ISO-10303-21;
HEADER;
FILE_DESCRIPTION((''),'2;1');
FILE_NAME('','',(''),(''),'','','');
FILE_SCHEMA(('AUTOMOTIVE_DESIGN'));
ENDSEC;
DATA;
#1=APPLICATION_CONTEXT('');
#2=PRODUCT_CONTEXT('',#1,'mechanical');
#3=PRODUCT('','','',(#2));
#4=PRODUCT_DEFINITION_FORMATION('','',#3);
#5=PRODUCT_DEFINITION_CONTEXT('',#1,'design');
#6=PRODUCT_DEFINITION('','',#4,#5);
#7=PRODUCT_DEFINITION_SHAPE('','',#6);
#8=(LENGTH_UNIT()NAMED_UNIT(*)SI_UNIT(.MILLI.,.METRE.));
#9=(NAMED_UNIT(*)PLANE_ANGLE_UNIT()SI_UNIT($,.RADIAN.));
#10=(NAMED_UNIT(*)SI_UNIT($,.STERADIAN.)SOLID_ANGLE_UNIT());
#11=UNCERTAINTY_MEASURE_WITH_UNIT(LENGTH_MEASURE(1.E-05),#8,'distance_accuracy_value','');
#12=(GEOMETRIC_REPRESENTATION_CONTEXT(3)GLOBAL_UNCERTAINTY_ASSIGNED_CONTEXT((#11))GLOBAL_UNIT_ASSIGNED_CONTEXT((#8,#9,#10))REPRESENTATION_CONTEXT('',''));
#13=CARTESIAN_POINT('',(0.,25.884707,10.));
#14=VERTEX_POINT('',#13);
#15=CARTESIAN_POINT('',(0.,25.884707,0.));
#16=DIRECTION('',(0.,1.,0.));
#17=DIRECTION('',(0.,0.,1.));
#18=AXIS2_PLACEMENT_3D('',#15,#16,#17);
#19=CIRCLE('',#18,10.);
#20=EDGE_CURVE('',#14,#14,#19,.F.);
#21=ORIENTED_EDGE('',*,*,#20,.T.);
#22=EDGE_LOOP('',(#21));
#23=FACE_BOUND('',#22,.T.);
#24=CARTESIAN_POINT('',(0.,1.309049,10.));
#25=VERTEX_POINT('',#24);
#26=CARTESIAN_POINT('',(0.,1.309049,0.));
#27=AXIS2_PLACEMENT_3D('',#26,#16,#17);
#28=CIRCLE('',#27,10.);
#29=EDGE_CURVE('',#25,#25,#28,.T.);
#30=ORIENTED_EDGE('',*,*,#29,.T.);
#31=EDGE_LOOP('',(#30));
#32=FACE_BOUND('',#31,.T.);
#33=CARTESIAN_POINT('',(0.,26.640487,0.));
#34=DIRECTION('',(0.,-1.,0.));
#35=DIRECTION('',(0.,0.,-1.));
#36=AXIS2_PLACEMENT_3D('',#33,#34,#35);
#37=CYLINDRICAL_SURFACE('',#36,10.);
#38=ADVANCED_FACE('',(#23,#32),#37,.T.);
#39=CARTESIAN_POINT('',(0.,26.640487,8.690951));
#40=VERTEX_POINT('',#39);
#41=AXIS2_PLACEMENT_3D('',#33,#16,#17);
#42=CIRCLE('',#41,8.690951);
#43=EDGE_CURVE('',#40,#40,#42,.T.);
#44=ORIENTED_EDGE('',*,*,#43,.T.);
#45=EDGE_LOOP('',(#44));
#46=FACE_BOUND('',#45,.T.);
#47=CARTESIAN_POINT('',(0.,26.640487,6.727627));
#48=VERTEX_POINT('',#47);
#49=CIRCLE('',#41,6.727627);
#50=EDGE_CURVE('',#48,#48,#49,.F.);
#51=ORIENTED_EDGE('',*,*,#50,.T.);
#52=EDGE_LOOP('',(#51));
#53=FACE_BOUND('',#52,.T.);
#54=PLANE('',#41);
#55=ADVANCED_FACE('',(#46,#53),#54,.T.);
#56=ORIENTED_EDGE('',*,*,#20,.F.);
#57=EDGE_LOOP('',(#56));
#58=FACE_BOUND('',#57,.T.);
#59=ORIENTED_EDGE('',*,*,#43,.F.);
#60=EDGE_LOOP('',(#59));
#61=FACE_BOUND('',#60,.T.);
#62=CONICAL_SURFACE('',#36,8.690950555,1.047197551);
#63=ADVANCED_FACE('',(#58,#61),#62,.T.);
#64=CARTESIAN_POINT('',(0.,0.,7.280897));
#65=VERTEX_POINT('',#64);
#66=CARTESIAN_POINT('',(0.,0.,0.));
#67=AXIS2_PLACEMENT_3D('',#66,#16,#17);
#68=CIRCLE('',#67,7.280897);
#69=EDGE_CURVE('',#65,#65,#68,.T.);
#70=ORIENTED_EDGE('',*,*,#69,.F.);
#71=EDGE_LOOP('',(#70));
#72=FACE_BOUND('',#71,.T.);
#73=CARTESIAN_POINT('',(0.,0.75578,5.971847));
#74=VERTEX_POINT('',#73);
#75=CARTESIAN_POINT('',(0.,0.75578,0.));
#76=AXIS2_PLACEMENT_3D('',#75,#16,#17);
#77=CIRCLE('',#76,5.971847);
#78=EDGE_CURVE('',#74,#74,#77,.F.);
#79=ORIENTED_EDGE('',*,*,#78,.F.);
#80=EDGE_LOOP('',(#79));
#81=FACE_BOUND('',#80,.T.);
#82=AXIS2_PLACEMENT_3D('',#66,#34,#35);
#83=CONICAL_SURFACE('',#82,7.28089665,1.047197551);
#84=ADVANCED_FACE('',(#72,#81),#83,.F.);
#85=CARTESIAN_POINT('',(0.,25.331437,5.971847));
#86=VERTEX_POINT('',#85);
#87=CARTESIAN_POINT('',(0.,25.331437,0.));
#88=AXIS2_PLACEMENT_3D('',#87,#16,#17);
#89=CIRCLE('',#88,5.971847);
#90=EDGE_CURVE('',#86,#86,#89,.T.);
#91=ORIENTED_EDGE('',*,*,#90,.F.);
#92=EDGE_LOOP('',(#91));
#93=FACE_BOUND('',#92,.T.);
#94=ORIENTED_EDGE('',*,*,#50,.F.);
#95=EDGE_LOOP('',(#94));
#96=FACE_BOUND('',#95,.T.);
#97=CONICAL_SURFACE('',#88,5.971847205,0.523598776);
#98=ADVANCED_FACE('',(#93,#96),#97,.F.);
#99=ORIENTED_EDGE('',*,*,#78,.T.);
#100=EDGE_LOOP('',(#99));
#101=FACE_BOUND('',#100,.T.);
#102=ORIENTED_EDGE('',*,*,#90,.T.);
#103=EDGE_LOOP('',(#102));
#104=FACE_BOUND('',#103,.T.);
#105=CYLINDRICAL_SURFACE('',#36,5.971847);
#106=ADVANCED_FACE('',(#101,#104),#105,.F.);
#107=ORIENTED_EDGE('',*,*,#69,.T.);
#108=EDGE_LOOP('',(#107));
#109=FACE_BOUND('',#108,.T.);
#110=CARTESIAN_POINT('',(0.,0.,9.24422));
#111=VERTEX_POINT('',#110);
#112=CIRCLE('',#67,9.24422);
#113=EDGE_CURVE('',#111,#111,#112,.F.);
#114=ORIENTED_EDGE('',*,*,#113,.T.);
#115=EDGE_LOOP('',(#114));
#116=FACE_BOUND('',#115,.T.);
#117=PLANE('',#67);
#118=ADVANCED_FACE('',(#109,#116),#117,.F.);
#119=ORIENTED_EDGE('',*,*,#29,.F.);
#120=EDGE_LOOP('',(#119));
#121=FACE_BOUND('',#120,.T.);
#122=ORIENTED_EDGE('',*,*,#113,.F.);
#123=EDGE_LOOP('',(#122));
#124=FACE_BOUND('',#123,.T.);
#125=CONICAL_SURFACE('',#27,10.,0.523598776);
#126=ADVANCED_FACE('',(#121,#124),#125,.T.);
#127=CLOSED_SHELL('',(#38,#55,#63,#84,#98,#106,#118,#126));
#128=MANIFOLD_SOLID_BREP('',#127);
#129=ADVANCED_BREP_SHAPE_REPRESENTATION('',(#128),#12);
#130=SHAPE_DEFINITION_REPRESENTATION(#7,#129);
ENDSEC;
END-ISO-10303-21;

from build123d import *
from OCP.BRepFilletAPI import BRepFilletAPI_MakeChamfer

# Parameters (mm, degrees)
SKETCH1_R           = 10
BOSS_EXTRUDE1_DEPTH = 26.64048685
SKETCH2_R           = 5.971847205
CUT_EXTRUDE1_DEPTH  = 31.161491004
CHAMFER1_SIZE       = 0.75578005
CHAMFER1_SIZE2      = 1.309049445


with BuildPart() as part:
    # Sketch1 → Boss-Extrude1 (new body)
    with BuildSketch(Plane(origin=(0, 0, 0), x_dir=(1, 0, 0), z_dir=(0, 1, 0))):
        Circle(SKETCH1_R)
    extrude(amount=BOSS_EXTRUDE1_DEPTH)

    # Sketch2 → Cut-Extrude1 (cut, through all)
    with BuildSketch(Plane(origin=(0, 0, 0), x_dir=(1, 0, 0), z_dir=(0, 1, 0))):
        Circle(SKETCH2_R)
    extrude(amount=CUT_EXTRUDE1_DEPTH, mode=Mode.SUBTRACT)

    # Chamfer1: one chamfer whose edges measure the first distance from different faces: ONE call of the kernel's chamfer builder (chamfer() names one face for all edges)
    chamfer1_edges_1 = [part.edges().sort_by_distance(p)[0] for p in [
        (-5.971847205, 26.64048685, 0),
    ]]
    chamfer1_side_1 = [part.faces().sort_by_distance(p)[0] for p in [
        (-9.717157288, 26.64048685, 0),
    ]]
    chamfer1_edges_2 = [part.edges().sort_by_distance(p)[0] for p in [
        (-5.971847205, 0, 0),
    ]]
    chamfer1_side_2 = [part.faces().sort_by_distance(p)[0] for p in [
        (-5.971847205, 13.320243425, 0),
    ]]
    chamfer1_edges_3 = [part.edges().sort_by_distance(p)[0] for p in [
        (-10, 0, 0),
    ]]
    chamfer1_side_3 = [part.faces().sort_by_distance(p)[0] for p in [
        (-9.717157288, 0, 0),
    ]]
    chamfer1_edges_4 = [part.edges().sort_by_distance(p)[0] for p in [
        (-10, 26.64048685, 0),
    ]]
    chamfer1_side_4 = [part.faces().sort_by_distance(p)[0] for p in [
        (-10, 13.320243425, 0),
    ]]
    chamfer1 = BRepFilletAPI_MakeChamfer(part.part.solid().wrapped)
    for e in chamfer1_edges_1:
        chamfer1.Add(CHAMFER1_SIZE, CHAMFER1_SIZE2, e.wrapped, chamfer1_side_1[0].wrapped)  # the first distance lies on this face
    for e in chamfer1_edges_2:
        chamfer1.Add(CHAMFER1_SIZE, CHAMFER1_SIZE2, e.wrapped, chamfer1_side_2[0].wrapped)  # the first distance lies on this face
    for e in chamfer1_edges_3:
        chamfer1.Add(CHAMFER1_SIZE, CHAMFER1_SIZE2, e.wrapped, chamfer1_side_3[0].wrapped)  # the first distance lies on this face
    for e in chamfer1_edges_4:
        chamfer1.Add(CHAMFER1_SIZE, CHAMFER1_SIZE2, e.wrapped, chamfer1_side_4[0].wrapped)  # the first distance lies on this face
    add(Compound.cast(chamfer1.Shape()), mode=Mode.REPLACE)


solid = part.part
